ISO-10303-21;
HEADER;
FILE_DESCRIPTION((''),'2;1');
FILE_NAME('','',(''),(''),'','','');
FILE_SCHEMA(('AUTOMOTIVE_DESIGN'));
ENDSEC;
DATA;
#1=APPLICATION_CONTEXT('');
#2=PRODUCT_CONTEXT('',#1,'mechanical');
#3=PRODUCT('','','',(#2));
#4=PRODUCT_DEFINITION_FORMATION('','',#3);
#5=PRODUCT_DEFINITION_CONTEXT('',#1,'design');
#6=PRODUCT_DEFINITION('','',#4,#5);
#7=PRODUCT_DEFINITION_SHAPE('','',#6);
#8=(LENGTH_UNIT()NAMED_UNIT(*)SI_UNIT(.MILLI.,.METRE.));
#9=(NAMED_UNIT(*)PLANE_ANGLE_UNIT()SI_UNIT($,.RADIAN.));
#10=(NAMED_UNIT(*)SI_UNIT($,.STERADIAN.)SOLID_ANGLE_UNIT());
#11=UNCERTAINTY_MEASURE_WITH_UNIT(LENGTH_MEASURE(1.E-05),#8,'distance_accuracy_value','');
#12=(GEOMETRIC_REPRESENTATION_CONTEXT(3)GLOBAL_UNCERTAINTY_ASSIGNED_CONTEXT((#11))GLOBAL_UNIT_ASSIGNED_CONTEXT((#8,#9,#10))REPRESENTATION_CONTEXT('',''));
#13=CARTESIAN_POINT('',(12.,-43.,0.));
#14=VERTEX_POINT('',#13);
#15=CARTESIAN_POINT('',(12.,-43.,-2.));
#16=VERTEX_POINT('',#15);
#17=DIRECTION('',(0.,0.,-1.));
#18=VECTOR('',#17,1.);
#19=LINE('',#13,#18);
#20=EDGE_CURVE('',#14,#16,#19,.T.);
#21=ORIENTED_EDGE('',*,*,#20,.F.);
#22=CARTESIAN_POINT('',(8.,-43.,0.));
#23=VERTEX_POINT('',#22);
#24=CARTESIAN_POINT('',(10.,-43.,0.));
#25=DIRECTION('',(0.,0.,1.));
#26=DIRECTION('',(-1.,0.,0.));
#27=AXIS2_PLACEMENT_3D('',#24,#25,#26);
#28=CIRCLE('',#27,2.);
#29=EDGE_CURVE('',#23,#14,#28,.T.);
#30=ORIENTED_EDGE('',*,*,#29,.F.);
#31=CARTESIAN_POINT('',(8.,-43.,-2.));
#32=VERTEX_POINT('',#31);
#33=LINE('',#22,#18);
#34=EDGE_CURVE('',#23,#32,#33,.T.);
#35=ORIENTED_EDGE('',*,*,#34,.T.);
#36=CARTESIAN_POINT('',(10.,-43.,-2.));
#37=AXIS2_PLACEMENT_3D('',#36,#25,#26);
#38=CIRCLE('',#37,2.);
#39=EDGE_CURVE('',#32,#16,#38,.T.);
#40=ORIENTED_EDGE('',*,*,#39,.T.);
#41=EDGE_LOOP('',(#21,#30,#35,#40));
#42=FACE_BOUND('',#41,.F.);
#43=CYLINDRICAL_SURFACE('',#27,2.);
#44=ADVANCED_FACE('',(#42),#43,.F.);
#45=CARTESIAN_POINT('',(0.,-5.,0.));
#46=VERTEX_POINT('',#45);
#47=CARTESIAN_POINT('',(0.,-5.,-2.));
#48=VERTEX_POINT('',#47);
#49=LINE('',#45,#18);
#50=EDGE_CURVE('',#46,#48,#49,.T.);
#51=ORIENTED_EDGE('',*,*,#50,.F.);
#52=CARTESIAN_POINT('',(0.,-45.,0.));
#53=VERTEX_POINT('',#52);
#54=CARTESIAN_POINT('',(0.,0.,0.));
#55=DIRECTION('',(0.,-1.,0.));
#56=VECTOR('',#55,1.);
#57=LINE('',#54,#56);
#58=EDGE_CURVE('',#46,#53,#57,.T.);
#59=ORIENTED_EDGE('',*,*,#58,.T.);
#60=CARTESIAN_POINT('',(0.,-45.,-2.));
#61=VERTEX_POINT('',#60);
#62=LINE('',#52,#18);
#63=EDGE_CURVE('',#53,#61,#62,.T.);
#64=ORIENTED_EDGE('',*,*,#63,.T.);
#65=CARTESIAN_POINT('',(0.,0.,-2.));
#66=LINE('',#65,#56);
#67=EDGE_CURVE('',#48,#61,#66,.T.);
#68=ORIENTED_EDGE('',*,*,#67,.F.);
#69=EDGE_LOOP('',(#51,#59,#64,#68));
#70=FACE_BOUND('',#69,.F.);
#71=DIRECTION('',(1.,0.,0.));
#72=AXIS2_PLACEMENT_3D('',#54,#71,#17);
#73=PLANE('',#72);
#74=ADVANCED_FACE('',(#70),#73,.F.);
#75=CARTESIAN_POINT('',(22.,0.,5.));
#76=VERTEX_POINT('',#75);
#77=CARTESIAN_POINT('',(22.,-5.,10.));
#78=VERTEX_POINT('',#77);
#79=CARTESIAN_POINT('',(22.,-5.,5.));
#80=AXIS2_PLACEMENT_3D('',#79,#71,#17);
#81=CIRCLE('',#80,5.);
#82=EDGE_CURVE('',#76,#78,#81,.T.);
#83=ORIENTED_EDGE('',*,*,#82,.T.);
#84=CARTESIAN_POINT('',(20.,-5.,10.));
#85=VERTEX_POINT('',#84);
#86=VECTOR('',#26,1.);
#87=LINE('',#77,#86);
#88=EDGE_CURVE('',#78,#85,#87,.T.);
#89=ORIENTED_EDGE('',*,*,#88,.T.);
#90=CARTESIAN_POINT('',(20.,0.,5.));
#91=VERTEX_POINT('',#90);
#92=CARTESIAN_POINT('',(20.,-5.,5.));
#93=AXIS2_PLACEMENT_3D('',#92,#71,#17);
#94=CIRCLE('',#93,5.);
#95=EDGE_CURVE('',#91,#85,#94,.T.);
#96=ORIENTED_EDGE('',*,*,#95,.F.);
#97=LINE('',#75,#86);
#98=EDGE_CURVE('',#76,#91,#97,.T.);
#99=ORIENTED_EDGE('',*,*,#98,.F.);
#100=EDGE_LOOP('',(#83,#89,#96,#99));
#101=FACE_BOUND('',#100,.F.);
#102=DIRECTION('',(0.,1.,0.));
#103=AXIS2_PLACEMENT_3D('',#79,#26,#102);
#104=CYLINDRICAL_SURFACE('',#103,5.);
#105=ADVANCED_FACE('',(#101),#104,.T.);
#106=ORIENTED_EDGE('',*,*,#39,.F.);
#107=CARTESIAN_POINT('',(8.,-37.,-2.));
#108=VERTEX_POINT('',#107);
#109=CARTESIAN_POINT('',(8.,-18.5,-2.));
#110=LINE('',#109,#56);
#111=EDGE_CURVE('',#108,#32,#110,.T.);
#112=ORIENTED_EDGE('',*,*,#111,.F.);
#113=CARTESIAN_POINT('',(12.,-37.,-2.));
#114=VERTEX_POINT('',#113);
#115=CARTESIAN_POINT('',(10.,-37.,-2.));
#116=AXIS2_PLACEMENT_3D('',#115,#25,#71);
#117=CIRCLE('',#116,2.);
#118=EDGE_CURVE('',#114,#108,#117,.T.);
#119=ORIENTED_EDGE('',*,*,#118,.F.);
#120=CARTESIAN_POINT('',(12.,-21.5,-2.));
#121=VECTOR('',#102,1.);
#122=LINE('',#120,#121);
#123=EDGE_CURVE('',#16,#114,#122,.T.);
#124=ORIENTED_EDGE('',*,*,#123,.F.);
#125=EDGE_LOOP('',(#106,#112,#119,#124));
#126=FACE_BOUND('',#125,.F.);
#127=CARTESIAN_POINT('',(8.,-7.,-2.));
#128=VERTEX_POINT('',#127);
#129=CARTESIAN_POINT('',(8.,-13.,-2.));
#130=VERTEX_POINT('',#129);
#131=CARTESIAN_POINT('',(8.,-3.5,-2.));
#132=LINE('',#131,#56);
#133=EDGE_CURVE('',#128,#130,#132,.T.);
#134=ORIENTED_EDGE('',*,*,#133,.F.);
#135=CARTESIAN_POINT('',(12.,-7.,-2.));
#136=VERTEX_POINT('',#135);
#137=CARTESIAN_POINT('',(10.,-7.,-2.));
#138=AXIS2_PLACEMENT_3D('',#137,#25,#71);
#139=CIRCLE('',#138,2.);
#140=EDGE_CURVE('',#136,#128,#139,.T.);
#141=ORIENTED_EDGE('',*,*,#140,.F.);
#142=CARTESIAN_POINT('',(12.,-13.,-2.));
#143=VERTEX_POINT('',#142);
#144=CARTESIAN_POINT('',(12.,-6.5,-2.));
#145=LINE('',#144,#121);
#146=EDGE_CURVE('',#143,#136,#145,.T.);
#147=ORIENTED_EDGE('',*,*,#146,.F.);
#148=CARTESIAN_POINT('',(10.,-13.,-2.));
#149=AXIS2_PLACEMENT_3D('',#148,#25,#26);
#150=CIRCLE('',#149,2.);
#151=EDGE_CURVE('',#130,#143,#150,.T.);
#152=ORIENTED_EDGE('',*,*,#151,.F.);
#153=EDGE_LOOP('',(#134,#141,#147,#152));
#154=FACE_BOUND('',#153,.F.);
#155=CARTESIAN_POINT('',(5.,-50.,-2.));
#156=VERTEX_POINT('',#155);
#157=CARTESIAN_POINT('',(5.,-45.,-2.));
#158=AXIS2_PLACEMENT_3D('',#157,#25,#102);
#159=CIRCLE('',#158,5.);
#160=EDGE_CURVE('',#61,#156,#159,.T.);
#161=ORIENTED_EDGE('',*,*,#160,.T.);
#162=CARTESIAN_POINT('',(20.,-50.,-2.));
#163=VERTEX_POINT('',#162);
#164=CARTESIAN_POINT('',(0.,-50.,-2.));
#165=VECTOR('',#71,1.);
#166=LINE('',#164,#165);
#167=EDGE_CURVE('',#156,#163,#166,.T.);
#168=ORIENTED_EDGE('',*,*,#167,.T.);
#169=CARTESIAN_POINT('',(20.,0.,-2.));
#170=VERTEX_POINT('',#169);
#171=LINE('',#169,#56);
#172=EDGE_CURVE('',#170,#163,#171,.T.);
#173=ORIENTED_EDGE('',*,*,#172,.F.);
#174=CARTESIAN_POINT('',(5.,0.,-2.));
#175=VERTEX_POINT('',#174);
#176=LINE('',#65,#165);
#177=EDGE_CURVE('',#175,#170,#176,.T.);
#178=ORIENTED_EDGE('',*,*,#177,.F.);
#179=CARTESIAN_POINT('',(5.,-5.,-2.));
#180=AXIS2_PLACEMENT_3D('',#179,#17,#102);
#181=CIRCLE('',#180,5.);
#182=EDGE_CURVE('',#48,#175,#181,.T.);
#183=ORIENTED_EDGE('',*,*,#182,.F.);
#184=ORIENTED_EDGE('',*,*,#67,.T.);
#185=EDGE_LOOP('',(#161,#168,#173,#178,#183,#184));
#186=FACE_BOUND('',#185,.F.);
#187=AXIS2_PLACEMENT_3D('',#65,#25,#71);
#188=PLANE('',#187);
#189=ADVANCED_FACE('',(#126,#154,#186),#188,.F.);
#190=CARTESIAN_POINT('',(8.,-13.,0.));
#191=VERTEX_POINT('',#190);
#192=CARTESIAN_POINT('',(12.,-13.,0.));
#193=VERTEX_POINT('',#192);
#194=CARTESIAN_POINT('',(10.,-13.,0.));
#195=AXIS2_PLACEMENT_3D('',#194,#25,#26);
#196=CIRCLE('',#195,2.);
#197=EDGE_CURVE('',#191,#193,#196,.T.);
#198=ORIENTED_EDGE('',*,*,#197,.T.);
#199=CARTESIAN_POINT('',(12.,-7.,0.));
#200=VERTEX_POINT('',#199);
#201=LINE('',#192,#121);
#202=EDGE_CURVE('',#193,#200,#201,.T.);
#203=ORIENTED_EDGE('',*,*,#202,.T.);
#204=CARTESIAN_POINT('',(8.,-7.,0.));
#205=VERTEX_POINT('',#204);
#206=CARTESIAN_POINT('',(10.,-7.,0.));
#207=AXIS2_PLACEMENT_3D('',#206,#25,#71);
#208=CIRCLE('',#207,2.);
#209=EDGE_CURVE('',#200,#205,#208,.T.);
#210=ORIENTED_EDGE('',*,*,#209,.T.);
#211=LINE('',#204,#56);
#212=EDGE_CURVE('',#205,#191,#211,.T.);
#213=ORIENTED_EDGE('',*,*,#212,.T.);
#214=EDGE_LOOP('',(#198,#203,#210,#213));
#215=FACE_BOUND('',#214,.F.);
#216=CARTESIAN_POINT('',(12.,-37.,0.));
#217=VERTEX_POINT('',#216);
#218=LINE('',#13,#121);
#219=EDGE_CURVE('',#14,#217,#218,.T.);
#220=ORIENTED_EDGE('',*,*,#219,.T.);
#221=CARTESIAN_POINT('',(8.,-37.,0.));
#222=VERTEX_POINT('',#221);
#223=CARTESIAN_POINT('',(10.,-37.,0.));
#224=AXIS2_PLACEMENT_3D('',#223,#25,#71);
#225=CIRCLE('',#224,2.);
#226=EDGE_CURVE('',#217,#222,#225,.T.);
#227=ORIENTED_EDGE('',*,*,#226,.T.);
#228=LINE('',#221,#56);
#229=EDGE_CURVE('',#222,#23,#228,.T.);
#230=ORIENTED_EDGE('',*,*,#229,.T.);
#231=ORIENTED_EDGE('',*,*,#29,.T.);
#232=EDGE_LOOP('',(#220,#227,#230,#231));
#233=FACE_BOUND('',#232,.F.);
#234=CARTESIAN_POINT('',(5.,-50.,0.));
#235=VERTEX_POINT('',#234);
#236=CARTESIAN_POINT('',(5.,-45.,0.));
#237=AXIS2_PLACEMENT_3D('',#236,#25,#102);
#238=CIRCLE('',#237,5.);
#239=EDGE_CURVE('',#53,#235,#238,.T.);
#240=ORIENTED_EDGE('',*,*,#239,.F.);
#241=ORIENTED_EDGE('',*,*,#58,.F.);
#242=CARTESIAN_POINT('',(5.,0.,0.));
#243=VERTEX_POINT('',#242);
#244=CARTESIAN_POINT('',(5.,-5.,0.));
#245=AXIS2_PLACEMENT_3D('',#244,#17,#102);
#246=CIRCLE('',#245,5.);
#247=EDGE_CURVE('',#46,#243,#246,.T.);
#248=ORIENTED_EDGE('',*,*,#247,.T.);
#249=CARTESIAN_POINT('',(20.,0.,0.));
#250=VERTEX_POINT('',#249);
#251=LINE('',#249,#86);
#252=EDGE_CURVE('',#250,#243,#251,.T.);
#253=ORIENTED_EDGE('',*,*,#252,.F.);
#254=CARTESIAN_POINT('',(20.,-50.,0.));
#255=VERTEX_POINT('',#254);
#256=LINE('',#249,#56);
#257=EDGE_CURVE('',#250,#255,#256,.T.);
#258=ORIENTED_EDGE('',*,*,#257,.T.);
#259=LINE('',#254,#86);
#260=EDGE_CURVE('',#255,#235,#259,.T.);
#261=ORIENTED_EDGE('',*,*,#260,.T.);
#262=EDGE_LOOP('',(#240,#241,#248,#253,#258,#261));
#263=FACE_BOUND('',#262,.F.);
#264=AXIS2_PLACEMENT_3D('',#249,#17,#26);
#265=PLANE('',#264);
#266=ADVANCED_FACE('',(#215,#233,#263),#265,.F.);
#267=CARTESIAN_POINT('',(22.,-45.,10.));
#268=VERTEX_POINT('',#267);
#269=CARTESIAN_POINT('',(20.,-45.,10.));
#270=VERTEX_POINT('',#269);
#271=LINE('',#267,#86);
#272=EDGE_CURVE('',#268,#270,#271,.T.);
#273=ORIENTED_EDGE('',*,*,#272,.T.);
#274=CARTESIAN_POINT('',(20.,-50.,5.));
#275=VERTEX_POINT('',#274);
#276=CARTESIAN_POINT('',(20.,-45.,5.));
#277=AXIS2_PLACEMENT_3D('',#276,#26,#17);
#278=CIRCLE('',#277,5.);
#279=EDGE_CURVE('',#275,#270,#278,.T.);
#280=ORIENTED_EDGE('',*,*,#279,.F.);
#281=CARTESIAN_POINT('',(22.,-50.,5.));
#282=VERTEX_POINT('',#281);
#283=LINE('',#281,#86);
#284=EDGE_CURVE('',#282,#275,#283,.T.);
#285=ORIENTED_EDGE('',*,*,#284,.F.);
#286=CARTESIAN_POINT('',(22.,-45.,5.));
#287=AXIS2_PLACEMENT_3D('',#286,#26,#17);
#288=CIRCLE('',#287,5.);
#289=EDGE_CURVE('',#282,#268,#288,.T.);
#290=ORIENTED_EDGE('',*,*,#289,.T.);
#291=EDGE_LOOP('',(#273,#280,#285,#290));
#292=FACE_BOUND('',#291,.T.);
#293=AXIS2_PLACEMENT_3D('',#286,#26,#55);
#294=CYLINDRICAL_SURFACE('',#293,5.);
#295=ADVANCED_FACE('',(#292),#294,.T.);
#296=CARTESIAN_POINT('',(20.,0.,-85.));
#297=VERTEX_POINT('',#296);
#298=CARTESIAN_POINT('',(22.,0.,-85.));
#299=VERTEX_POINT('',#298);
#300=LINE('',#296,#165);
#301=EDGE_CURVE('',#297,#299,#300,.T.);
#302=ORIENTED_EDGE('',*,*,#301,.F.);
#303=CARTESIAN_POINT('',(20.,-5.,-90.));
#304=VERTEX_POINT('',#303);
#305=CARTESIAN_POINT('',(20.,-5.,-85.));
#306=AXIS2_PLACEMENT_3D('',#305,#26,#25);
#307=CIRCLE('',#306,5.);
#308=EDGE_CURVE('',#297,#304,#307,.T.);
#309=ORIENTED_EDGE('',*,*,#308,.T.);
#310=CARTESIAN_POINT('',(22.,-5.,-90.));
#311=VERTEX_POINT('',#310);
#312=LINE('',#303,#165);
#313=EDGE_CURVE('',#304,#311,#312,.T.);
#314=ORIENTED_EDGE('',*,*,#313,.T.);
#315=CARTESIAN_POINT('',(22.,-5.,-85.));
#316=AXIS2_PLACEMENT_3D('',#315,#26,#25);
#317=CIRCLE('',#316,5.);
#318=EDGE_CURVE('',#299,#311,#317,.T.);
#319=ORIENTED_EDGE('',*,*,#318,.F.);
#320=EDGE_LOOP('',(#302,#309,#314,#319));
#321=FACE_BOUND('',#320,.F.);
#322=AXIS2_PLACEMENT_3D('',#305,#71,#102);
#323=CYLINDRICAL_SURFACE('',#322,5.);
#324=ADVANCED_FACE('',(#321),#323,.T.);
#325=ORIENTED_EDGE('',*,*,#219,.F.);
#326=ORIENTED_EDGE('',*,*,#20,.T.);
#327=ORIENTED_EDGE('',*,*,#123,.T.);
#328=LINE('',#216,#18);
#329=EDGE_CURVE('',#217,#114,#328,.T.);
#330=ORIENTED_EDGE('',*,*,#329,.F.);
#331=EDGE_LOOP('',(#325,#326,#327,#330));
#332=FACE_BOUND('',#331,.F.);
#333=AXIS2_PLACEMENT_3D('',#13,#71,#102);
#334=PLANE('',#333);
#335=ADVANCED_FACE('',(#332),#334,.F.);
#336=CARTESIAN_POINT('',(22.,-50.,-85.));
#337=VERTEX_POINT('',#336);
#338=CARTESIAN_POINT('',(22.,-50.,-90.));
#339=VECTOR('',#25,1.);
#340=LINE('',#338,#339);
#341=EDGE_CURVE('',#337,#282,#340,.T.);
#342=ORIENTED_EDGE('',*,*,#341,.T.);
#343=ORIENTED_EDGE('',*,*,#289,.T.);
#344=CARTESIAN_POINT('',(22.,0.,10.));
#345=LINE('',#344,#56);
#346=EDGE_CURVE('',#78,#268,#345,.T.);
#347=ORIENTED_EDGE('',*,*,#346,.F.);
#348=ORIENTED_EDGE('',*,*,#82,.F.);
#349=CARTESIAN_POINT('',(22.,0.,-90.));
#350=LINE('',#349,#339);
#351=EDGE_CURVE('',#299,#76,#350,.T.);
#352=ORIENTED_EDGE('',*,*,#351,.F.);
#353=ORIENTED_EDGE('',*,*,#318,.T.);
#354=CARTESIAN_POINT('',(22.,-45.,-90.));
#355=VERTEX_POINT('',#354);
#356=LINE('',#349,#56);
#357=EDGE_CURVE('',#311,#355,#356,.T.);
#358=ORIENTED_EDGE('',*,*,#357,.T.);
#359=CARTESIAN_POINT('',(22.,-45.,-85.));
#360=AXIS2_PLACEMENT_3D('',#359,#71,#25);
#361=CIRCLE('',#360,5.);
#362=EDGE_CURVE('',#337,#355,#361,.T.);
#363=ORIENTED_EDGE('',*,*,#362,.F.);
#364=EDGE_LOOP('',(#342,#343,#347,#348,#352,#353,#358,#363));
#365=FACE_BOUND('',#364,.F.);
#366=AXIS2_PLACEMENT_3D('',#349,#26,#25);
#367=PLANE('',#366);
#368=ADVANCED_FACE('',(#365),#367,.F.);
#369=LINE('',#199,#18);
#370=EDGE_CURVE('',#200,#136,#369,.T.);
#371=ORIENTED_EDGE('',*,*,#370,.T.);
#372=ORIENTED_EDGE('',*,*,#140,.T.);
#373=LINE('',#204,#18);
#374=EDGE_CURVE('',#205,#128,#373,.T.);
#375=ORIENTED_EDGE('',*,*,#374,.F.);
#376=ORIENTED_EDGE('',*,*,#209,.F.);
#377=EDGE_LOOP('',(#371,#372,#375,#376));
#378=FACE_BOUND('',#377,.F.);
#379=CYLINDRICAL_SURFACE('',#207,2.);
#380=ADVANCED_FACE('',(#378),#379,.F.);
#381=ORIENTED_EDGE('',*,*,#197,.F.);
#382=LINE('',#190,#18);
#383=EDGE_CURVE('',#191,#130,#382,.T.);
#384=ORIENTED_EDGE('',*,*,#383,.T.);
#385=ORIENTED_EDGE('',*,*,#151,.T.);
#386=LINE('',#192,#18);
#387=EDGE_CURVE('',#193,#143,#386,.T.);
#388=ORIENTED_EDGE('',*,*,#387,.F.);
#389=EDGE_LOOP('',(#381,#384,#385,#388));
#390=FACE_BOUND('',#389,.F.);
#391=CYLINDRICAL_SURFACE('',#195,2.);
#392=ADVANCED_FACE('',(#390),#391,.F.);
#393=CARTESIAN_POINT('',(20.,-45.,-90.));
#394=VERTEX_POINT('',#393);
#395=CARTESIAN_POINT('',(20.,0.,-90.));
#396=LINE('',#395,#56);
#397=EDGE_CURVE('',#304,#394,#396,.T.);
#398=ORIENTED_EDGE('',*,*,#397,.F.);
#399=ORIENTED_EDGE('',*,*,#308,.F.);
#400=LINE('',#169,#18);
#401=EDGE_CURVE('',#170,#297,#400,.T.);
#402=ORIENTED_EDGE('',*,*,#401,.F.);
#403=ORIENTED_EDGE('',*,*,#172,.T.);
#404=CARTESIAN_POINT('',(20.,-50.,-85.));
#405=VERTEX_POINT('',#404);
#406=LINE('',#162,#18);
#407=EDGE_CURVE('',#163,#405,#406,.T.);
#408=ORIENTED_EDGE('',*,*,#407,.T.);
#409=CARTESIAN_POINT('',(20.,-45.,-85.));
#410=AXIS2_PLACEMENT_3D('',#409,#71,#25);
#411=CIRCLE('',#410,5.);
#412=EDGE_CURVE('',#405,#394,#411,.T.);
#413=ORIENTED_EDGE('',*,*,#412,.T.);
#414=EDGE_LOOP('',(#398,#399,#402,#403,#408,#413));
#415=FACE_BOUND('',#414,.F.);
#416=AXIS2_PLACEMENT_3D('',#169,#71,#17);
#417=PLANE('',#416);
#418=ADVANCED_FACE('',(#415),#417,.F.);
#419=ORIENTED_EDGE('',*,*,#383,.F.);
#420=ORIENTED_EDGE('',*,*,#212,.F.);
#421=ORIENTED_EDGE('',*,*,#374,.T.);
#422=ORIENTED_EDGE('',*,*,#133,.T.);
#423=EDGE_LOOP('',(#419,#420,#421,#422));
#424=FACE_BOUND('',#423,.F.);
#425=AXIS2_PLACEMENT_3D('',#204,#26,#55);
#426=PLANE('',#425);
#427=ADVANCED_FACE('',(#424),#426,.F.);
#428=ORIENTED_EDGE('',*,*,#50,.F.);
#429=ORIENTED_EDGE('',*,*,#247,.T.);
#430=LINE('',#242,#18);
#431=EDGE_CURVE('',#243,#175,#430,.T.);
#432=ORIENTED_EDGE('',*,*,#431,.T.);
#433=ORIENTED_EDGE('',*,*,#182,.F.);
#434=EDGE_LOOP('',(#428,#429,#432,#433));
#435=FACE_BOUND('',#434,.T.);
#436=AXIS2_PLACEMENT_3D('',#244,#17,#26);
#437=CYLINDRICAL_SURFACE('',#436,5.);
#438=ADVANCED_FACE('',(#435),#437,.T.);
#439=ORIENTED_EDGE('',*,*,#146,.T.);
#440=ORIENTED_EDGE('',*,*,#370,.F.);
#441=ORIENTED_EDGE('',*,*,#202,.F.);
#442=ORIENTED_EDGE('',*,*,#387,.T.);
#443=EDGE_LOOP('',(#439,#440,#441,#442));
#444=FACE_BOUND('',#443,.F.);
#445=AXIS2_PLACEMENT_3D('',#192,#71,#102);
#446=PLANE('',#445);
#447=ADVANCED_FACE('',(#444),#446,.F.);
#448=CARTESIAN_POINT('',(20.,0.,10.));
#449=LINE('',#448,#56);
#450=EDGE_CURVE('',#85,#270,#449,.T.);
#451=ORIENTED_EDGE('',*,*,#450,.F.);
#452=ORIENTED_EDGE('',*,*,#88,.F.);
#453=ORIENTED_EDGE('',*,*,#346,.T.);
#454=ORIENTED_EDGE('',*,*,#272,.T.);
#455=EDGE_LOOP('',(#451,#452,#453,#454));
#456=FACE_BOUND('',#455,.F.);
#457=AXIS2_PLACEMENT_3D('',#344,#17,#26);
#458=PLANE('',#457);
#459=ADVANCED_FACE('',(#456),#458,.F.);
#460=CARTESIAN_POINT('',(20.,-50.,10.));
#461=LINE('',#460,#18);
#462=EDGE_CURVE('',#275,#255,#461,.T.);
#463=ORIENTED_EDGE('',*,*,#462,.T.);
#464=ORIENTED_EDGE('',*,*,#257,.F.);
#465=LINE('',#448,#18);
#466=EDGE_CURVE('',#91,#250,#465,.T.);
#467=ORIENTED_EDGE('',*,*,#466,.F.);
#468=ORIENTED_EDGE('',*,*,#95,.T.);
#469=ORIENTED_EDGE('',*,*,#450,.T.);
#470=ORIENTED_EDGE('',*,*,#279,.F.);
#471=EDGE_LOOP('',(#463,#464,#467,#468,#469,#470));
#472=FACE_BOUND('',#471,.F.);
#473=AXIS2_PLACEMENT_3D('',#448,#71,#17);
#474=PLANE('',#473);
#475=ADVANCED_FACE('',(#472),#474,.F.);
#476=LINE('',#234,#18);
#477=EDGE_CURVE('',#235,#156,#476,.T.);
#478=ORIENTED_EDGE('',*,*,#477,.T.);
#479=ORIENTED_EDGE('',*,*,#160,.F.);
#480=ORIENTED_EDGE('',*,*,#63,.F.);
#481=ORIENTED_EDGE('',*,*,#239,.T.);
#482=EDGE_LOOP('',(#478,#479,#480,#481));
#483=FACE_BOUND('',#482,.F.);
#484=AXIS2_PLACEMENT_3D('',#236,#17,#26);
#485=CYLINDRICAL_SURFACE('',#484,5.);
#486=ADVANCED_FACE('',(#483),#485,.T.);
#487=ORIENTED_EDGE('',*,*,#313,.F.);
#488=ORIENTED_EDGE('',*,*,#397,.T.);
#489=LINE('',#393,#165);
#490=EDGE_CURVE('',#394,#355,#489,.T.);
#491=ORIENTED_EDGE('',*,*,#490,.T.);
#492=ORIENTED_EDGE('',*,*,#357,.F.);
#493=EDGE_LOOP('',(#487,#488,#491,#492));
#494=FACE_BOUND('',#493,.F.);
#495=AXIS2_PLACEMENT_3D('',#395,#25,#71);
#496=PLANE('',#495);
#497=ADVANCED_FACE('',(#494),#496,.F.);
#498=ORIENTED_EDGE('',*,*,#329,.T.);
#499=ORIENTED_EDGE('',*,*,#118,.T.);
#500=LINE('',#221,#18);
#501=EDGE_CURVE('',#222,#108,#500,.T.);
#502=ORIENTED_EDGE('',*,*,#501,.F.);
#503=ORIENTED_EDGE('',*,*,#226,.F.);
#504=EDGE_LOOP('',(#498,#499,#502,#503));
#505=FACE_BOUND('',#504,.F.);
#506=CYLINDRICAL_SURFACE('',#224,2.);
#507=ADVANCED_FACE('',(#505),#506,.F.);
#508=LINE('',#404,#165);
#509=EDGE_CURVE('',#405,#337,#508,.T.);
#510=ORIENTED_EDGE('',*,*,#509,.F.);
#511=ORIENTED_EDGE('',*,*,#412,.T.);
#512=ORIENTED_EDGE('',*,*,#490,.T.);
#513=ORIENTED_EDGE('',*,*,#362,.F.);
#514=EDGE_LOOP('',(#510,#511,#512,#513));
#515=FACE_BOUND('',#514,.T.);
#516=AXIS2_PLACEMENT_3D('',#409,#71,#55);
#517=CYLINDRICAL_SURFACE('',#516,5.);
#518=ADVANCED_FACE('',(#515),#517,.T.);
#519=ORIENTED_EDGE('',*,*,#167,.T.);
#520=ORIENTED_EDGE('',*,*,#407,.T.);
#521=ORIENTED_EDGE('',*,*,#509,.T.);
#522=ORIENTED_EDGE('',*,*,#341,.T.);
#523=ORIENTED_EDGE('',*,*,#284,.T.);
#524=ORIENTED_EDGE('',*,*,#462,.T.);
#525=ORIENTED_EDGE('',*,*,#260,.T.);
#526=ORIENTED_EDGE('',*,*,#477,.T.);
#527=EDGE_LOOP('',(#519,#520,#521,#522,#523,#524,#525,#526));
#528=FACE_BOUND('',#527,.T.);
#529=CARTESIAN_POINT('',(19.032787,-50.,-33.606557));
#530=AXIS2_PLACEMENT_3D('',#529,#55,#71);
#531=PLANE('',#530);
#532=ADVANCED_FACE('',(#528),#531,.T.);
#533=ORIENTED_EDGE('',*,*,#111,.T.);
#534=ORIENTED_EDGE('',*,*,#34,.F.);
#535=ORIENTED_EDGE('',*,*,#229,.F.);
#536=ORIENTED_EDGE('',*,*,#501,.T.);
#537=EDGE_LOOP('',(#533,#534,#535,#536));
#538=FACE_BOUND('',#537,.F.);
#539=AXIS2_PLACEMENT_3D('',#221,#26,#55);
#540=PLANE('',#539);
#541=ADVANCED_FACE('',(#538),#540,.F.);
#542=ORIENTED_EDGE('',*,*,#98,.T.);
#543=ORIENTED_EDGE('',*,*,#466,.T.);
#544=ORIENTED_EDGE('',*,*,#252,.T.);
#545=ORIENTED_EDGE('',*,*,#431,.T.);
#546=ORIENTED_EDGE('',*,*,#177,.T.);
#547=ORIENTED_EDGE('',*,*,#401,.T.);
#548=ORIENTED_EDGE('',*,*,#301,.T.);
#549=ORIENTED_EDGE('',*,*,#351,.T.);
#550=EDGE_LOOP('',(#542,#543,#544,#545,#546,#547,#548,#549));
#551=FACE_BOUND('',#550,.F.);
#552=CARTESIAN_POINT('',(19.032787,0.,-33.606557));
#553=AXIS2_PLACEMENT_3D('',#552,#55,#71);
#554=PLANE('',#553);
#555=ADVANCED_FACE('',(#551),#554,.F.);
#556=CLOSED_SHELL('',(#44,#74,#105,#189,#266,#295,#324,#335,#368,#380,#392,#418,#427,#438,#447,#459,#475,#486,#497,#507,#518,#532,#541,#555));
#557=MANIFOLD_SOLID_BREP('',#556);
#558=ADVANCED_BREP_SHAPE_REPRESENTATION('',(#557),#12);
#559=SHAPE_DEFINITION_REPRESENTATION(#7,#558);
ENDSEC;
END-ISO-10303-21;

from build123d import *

# Parameters (mm, degrees)
F1_DEPTH = 50
F3_DEPTH = 25
F4_R     = 5


# Not quite as in the source:
# - a feature names something its author has since deleted; it is built from what else it names


with BuildPart() as f1:
    # F0 (on Front) → F1 (new body)
    with BuildSketch(Plane.XZ):
        Polygon((0, 0), (0, -2), (20, -2), (20, -90), (22, -90), (22, 10), (20, 10), (20, 0), align=None)
    extrude(amount=F1_DEPTH)

    # F2 (on face) → F3 (cut)
    with BuildSketch(Plane.XY):
        with BuildLine():
            ThreePointArc((12, -7), (10, -5), (8, -7))
            Line((8, -7), (8, -13))
            ThreePointArc((8, -13), (10, -15), (12, -13))
            Line((12, -13), (12, -7))
        make_face()
        with BuildLine():
            ThreePointArc((8, -43), (10, -45), (12, -43))
            Line((12, -43), (12, -37))
            ThreePointArc((12, -37), (10, -35), (8, -37))
            Line((8, -37), (8, -43))
        make_face()
    extrude(amount=-F3_DEPTH, mode=Mode.SUBTRACT)

    # F4
    f4_edges = [f1.edges().sort_by_distance(p)[0] for p in [
        (21, -50, 10),
        (21, 0, 10),
        (21, -50, -90),
        (21, 0, -90),
        (0, -50, -1),
        (0, 0, -1),
    ]]
    fillet(f4_edges, radius=F4_R)


solid = f1.part
